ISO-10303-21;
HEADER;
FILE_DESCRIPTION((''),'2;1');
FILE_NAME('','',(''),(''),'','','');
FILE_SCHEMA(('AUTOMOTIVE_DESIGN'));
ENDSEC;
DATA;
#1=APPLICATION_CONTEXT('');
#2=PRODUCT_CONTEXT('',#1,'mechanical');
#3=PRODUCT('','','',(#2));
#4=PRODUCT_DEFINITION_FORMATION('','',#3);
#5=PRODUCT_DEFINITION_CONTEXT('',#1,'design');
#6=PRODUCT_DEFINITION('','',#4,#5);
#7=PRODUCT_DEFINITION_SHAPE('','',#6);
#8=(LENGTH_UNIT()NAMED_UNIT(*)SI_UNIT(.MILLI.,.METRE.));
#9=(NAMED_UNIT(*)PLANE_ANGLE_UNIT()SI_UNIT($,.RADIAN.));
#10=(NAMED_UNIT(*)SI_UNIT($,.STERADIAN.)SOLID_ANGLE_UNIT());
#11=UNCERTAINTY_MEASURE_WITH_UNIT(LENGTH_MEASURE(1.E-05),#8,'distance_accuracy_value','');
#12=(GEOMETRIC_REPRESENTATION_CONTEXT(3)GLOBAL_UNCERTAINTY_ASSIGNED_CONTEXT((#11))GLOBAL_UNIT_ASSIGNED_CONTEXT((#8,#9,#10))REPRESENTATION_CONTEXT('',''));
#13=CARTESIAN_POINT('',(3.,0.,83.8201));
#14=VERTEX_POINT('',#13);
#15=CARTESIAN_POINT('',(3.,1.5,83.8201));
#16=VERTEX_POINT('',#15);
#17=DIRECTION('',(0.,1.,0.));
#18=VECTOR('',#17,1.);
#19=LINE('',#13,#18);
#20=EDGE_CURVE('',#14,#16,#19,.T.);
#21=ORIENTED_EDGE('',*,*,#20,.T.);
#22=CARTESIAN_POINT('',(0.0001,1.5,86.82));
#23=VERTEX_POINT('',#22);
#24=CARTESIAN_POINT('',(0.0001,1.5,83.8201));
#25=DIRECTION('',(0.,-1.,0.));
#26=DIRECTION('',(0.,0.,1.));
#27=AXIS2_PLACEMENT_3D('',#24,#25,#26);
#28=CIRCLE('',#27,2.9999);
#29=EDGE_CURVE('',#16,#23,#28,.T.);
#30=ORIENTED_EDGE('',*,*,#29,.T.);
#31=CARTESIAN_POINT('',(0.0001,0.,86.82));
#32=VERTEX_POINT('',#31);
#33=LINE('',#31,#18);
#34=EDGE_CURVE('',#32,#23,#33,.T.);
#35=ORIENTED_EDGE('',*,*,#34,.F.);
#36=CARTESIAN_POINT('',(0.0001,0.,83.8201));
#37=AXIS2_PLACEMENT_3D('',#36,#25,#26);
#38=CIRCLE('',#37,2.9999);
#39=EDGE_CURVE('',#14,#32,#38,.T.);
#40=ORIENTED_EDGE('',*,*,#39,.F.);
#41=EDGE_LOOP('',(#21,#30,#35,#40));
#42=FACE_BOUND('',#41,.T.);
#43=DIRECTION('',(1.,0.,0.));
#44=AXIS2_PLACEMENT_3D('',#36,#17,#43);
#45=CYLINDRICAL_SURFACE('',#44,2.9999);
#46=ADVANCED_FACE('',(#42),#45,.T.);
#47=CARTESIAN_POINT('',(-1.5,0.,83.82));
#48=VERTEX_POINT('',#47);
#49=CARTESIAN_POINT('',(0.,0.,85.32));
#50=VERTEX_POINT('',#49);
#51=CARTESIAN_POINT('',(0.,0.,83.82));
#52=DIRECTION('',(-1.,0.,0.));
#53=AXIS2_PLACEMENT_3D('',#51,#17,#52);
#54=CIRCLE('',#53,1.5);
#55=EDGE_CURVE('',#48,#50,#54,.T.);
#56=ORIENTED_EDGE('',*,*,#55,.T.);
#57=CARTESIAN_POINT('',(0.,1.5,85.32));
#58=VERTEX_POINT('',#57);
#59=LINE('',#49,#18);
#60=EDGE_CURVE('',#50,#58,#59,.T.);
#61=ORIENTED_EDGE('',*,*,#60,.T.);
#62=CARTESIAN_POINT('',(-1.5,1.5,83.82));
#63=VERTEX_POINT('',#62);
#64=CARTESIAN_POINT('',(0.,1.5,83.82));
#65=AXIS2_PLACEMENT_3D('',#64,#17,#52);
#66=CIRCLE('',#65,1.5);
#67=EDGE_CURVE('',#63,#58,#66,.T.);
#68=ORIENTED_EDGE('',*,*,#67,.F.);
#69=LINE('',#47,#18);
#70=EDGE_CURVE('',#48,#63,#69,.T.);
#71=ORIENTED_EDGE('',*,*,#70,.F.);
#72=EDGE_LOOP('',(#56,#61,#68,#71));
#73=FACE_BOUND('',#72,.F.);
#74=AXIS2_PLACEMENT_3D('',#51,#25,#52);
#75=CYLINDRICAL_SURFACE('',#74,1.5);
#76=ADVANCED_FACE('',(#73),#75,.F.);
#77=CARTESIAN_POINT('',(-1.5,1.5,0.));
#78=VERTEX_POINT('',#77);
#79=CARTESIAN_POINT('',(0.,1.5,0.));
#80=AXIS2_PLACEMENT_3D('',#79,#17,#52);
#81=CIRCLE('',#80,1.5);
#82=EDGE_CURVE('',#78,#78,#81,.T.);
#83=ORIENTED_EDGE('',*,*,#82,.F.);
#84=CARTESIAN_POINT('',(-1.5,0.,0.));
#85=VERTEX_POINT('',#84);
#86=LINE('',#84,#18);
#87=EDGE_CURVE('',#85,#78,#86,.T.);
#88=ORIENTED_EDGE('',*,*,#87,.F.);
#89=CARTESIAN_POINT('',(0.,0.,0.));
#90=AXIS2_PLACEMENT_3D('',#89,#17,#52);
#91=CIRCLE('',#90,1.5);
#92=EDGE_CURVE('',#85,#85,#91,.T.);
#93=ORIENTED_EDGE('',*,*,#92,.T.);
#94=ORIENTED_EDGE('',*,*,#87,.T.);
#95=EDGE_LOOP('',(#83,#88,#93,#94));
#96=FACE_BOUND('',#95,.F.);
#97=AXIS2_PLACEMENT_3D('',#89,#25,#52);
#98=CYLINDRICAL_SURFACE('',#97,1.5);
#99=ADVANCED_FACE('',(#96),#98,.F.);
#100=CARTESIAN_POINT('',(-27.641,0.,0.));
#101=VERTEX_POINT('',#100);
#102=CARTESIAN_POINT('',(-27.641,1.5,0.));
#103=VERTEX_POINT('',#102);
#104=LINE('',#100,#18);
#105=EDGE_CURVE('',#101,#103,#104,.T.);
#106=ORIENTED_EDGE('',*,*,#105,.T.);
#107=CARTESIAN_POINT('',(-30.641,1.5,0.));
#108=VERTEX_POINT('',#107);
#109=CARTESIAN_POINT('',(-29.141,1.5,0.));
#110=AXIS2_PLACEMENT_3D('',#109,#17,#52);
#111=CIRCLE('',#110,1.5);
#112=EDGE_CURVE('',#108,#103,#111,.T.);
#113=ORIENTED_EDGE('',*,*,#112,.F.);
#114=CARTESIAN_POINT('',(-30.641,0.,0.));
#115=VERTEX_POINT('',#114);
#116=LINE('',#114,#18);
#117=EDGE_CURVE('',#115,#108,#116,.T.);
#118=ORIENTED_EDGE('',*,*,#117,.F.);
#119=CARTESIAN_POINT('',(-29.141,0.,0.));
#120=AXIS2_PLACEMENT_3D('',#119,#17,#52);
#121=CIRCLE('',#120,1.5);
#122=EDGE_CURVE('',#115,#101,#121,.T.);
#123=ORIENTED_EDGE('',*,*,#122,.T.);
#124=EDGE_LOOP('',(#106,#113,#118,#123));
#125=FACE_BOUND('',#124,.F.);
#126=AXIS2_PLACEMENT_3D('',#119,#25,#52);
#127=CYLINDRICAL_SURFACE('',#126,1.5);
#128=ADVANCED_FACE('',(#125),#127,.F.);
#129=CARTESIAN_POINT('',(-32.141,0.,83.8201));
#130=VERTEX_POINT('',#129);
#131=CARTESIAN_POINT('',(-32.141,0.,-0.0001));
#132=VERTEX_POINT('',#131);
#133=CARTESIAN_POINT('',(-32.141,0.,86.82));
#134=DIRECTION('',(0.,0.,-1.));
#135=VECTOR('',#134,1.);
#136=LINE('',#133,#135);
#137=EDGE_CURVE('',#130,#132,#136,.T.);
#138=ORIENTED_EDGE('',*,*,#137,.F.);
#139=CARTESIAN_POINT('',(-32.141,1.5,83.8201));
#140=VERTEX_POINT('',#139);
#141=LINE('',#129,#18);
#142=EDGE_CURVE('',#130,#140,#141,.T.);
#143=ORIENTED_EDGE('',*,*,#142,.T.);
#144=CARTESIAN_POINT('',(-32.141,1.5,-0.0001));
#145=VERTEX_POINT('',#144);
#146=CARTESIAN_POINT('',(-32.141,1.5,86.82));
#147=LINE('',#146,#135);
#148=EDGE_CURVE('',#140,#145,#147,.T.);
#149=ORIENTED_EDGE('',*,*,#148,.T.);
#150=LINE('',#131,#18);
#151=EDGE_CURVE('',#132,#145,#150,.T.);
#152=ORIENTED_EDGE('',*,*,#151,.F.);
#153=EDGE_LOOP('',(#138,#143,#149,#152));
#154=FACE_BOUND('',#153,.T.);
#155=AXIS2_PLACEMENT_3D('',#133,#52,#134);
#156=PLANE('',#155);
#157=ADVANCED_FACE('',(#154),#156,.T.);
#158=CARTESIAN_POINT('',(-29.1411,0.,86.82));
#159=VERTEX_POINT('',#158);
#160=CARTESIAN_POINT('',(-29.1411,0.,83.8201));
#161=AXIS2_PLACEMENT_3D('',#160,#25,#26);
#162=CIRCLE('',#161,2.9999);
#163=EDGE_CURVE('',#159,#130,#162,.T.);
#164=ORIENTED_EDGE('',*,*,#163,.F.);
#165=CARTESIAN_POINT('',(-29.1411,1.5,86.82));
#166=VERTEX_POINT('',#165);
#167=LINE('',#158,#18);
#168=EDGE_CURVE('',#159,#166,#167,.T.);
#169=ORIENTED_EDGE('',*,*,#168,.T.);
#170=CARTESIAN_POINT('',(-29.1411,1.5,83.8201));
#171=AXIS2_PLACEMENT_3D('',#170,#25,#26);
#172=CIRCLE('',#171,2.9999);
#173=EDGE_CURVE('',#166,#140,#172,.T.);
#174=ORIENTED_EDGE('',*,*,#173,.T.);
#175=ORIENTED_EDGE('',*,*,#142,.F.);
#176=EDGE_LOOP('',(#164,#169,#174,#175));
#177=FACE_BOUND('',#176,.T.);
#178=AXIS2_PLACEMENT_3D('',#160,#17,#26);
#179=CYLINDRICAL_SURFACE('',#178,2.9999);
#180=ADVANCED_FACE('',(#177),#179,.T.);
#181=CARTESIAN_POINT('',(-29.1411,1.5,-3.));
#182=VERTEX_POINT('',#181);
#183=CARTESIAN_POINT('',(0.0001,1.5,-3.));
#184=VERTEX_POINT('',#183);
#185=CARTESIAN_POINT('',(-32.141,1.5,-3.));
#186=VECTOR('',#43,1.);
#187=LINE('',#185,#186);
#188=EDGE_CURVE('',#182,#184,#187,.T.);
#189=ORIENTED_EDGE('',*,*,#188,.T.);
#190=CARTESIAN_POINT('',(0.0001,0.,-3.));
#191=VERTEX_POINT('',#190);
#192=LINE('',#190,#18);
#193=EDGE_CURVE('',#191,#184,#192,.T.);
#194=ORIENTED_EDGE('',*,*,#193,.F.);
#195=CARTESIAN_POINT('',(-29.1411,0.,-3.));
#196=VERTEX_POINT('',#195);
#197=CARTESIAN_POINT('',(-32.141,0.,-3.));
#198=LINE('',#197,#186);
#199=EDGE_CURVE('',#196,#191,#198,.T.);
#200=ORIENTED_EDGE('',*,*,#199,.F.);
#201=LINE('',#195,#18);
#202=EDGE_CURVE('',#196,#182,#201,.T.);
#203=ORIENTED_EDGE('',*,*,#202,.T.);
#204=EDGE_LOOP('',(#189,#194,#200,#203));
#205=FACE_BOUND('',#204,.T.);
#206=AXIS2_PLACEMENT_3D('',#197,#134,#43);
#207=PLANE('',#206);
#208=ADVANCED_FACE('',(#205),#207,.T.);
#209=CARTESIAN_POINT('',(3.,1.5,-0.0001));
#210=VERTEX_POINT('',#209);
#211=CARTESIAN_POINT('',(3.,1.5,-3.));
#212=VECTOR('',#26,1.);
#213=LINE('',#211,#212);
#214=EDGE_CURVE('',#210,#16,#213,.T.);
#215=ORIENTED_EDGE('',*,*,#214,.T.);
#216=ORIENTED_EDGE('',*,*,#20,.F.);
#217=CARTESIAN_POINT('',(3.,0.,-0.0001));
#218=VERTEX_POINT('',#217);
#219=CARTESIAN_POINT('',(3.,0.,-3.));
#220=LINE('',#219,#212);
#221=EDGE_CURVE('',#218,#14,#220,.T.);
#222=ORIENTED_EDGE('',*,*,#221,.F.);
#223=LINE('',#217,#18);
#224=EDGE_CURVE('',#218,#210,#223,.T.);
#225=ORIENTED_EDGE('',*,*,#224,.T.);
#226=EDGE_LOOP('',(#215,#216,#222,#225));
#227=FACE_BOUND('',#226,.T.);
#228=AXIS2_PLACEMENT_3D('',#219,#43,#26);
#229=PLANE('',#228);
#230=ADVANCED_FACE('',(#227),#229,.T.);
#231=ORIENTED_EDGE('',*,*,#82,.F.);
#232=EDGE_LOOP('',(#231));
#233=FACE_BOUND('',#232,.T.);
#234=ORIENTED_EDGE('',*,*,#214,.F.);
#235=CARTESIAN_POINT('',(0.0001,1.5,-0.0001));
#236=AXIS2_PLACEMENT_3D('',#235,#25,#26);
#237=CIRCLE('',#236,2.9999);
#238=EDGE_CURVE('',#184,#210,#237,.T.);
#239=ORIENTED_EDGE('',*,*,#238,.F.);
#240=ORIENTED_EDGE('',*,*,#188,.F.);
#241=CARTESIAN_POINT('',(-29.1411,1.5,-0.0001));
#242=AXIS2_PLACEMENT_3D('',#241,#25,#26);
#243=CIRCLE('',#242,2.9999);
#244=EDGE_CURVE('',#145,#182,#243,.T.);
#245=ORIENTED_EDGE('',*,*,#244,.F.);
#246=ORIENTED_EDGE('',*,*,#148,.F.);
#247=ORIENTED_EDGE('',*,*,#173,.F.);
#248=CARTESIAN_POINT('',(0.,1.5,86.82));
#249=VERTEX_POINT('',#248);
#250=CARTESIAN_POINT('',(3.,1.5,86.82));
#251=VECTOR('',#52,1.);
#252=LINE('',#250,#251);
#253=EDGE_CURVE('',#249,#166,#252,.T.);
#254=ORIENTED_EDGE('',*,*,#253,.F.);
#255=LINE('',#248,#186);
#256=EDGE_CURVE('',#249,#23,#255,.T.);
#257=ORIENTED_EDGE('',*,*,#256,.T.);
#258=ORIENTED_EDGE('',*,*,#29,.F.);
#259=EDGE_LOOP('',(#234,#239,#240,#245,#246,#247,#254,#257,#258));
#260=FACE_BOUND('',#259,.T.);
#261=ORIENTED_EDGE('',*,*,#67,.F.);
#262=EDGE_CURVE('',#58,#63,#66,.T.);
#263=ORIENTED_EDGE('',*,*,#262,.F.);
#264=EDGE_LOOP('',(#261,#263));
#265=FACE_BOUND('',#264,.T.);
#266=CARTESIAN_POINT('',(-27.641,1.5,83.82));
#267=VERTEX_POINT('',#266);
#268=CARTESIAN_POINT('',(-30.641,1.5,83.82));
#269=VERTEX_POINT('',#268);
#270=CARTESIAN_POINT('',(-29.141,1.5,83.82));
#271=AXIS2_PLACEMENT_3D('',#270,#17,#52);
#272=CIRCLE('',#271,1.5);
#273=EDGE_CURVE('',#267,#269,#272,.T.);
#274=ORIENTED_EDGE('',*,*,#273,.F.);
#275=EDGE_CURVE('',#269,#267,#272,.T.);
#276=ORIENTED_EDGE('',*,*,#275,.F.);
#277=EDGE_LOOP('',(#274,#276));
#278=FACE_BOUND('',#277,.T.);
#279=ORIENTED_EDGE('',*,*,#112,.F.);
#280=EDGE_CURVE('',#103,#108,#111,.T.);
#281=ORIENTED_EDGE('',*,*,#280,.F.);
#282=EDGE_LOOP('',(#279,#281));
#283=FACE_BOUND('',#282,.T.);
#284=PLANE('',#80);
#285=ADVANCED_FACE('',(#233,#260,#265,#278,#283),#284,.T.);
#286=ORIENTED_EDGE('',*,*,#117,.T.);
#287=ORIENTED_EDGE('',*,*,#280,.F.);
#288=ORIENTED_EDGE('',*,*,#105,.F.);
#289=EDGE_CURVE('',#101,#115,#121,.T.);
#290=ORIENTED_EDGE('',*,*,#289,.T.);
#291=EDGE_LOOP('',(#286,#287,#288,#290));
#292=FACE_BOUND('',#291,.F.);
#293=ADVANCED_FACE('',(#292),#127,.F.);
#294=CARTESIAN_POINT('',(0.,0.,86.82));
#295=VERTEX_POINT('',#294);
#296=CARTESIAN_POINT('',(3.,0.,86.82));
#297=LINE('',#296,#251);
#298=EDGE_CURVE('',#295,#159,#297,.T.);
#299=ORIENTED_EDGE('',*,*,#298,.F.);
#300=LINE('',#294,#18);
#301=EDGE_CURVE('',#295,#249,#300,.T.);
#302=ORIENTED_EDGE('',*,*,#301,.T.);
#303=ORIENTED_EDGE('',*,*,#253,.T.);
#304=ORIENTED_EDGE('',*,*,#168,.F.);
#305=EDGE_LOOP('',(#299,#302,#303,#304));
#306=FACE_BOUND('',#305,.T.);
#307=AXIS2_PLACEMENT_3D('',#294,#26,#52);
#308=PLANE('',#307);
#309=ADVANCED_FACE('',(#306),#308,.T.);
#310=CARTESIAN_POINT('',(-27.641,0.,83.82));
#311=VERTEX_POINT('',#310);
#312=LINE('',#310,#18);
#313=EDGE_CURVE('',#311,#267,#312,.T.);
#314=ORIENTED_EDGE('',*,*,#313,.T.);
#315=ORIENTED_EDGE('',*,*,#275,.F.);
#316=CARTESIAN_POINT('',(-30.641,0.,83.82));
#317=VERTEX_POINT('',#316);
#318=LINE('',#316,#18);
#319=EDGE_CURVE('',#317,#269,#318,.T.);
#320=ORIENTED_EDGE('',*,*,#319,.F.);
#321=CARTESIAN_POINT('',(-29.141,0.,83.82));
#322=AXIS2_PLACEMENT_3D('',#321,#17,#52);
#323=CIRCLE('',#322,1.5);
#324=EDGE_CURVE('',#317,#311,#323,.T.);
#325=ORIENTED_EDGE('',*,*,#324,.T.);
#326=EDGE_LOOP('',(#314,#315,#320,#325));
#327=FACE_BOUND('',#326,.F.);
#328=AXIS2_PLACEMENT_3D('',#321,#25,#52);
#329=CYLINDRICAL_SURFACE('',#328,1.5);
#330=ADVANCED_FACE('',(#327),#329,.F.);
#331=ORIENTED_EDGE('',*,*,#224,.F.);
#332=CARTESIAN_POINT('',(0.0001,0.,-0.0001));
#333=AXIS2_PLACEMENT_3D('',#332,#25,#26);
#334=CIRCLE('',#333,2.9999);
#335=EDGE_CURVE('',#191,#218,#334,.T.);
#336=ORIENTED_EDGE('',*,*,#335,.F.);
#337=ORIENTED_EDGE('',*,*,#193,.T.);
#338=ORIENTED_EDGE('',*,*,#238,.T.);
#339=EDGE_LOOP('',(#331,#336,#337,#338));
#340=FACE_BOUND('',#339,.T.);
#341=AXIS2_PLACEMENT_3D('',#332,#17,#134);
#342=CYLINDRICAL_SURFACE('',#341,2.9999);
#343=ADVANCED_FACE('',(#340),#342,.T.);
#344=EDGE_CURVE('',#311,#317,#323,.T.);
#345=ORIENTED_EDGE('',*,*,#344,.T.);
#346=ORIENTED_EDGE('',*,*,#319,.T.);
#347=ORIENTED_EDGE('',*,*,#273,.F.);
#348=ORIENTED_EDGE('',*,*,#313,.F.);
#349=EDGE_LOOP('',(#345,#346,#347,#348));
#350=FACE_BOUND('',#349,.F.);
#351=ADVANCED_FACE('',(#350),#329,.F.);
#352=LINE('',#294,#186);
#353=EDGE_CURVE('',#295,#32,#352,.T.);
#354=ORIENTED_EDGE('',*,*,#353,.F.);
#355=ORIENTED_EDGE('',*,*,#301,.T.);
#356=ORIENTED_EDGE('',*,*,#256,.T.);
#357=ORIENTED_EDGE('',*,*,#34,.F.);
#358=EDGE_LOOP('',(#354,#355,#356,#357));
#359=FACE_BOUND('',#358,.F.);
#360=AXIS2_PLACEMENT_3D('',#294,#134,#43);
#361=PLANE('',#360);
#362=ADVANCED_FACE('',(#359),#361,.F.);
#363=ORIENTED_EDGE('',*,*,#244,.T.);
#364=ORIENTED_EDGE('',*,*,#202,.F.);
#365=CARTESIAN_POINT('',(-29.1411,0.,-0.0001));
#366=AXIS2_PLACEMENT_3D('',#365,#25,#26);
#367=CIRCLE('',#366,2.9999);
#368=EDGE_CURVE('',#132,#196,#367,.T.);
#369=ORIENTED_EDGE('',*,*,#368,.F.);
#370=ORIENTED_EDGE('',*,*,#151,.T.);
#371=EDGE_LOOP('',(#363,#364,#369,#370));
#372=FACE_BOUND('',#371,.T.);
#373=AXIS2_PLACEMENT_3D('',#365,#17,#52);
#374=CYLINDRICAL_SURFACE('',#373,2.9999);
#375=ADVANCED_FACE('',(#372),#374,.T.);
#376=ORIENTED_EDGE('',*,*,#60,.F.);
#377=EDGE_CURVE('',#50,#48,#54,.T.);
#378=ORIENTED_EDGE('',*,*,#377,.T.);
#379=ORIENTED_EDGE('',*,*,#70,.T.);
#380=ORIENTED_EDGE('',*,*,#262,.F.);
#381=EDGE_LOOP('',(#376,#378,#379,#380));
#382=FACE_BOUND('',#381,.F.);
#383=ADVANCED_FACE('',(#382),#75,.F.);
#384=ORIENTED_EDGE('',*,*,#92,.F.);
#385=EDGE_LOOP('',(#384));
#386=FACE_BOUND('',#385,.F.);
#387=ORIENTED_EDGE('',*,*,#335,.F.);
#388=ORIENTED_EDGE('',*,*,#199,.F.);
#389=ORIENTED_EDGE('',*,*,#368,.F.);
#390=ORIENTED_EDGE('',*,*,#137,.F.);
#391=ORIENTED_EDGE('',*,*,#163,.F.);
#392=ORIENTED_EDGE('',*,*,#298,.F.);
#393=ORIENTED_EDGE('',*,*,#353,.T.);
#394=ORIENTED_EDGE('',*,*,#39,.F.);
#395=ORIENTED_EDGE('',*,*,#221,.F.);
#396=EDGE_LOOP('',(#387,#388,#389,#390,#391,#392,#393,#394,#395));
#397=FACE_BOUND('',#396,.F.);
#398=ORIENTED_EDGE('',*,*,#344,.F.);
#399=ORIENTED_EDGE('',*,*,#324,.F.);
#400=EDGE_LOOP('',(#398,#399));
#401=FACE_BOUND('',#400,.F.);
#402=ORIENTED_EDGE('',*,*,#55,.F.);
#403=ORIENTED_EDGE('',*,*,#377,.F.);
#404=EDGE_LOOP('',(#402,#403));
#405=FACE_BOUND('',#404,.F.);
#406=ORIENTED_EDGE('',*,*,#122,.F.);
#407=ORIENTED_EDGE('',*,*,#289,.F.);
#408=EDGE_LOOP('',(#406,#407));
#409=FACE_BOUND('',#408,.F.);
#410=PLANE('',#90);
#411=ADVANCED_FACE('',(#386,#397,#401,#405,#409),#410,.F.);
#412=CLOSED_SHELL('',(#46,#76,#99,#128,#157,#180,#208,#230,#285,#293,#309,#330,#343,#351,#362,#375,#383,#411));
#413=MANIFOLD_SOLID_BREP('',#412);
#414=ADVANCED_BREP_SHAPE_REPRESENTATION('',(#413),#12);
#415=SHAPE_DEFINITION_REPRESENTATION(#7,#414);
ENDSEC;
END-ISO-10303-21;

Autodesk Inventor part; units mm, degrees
ref_plane "YZ Plane" through (0, 0, 0) normal (1, 0, 0) x (0, 1, 0)
ref_plane "XZ Plane" through (0, 0, 0) normal (0, 1, 0) x (-1, 0, 0)
ref_plane "XY Plane" through (0, 0, 0) normal (0, 0, 1) x (1, 0, 0)
sketch "Sketch1" plane through (0, 0, 0) normal (0, 1, 0) x (-1, 0, 0)
  line L0 (0, 0) -> (29.141, 0)
  line L1 (29.141, 83.82) -> (0, 83.82)
  line L2 (0, 83.82) -> (0, 86.82)
  line L3 (0, 86.82) -> (-3, 86.82)
  line L4 (-3, 86.82) -> (32.141, 86.82)
  line L5 (32.141, 86.82) -> (32.141, -3)
  line L6 (32.141, -3) -> (-3, -3)
  line L7 (-3, -3) -> (-3, 86.82)
  circle A0 centre (0, 83.82) radius 1.5
  circle A1 centre (29.141, 83.82) radius 1.5
  circle A2 centre (0, 0) radius 1.5
  circle A3 centre (29.141, 0) radius 1.5
  dimension "d0" = 29.141
  dimension "d1" = 83.82
  dimension "d2" = 3
  dimension "d3" = 3
  dimension "d4" = 35.141
  dimension "d5" = 89.82
  dimension "d6" = 3
  dimension "d7" = 3
  dimension "d8" = 3
  dimension "d9" = 3
extrude "Extrusion1" add sketch "Sketch1" along normal blind 1.5
fillet "Fillet1" radius 3 4 edges at (-32.141, 0.75, 86.82) (3, 0.75, 86.82) (3, 0.75, -3) (-32.141, 0.75, -3)
properties part number "Power Supply"
